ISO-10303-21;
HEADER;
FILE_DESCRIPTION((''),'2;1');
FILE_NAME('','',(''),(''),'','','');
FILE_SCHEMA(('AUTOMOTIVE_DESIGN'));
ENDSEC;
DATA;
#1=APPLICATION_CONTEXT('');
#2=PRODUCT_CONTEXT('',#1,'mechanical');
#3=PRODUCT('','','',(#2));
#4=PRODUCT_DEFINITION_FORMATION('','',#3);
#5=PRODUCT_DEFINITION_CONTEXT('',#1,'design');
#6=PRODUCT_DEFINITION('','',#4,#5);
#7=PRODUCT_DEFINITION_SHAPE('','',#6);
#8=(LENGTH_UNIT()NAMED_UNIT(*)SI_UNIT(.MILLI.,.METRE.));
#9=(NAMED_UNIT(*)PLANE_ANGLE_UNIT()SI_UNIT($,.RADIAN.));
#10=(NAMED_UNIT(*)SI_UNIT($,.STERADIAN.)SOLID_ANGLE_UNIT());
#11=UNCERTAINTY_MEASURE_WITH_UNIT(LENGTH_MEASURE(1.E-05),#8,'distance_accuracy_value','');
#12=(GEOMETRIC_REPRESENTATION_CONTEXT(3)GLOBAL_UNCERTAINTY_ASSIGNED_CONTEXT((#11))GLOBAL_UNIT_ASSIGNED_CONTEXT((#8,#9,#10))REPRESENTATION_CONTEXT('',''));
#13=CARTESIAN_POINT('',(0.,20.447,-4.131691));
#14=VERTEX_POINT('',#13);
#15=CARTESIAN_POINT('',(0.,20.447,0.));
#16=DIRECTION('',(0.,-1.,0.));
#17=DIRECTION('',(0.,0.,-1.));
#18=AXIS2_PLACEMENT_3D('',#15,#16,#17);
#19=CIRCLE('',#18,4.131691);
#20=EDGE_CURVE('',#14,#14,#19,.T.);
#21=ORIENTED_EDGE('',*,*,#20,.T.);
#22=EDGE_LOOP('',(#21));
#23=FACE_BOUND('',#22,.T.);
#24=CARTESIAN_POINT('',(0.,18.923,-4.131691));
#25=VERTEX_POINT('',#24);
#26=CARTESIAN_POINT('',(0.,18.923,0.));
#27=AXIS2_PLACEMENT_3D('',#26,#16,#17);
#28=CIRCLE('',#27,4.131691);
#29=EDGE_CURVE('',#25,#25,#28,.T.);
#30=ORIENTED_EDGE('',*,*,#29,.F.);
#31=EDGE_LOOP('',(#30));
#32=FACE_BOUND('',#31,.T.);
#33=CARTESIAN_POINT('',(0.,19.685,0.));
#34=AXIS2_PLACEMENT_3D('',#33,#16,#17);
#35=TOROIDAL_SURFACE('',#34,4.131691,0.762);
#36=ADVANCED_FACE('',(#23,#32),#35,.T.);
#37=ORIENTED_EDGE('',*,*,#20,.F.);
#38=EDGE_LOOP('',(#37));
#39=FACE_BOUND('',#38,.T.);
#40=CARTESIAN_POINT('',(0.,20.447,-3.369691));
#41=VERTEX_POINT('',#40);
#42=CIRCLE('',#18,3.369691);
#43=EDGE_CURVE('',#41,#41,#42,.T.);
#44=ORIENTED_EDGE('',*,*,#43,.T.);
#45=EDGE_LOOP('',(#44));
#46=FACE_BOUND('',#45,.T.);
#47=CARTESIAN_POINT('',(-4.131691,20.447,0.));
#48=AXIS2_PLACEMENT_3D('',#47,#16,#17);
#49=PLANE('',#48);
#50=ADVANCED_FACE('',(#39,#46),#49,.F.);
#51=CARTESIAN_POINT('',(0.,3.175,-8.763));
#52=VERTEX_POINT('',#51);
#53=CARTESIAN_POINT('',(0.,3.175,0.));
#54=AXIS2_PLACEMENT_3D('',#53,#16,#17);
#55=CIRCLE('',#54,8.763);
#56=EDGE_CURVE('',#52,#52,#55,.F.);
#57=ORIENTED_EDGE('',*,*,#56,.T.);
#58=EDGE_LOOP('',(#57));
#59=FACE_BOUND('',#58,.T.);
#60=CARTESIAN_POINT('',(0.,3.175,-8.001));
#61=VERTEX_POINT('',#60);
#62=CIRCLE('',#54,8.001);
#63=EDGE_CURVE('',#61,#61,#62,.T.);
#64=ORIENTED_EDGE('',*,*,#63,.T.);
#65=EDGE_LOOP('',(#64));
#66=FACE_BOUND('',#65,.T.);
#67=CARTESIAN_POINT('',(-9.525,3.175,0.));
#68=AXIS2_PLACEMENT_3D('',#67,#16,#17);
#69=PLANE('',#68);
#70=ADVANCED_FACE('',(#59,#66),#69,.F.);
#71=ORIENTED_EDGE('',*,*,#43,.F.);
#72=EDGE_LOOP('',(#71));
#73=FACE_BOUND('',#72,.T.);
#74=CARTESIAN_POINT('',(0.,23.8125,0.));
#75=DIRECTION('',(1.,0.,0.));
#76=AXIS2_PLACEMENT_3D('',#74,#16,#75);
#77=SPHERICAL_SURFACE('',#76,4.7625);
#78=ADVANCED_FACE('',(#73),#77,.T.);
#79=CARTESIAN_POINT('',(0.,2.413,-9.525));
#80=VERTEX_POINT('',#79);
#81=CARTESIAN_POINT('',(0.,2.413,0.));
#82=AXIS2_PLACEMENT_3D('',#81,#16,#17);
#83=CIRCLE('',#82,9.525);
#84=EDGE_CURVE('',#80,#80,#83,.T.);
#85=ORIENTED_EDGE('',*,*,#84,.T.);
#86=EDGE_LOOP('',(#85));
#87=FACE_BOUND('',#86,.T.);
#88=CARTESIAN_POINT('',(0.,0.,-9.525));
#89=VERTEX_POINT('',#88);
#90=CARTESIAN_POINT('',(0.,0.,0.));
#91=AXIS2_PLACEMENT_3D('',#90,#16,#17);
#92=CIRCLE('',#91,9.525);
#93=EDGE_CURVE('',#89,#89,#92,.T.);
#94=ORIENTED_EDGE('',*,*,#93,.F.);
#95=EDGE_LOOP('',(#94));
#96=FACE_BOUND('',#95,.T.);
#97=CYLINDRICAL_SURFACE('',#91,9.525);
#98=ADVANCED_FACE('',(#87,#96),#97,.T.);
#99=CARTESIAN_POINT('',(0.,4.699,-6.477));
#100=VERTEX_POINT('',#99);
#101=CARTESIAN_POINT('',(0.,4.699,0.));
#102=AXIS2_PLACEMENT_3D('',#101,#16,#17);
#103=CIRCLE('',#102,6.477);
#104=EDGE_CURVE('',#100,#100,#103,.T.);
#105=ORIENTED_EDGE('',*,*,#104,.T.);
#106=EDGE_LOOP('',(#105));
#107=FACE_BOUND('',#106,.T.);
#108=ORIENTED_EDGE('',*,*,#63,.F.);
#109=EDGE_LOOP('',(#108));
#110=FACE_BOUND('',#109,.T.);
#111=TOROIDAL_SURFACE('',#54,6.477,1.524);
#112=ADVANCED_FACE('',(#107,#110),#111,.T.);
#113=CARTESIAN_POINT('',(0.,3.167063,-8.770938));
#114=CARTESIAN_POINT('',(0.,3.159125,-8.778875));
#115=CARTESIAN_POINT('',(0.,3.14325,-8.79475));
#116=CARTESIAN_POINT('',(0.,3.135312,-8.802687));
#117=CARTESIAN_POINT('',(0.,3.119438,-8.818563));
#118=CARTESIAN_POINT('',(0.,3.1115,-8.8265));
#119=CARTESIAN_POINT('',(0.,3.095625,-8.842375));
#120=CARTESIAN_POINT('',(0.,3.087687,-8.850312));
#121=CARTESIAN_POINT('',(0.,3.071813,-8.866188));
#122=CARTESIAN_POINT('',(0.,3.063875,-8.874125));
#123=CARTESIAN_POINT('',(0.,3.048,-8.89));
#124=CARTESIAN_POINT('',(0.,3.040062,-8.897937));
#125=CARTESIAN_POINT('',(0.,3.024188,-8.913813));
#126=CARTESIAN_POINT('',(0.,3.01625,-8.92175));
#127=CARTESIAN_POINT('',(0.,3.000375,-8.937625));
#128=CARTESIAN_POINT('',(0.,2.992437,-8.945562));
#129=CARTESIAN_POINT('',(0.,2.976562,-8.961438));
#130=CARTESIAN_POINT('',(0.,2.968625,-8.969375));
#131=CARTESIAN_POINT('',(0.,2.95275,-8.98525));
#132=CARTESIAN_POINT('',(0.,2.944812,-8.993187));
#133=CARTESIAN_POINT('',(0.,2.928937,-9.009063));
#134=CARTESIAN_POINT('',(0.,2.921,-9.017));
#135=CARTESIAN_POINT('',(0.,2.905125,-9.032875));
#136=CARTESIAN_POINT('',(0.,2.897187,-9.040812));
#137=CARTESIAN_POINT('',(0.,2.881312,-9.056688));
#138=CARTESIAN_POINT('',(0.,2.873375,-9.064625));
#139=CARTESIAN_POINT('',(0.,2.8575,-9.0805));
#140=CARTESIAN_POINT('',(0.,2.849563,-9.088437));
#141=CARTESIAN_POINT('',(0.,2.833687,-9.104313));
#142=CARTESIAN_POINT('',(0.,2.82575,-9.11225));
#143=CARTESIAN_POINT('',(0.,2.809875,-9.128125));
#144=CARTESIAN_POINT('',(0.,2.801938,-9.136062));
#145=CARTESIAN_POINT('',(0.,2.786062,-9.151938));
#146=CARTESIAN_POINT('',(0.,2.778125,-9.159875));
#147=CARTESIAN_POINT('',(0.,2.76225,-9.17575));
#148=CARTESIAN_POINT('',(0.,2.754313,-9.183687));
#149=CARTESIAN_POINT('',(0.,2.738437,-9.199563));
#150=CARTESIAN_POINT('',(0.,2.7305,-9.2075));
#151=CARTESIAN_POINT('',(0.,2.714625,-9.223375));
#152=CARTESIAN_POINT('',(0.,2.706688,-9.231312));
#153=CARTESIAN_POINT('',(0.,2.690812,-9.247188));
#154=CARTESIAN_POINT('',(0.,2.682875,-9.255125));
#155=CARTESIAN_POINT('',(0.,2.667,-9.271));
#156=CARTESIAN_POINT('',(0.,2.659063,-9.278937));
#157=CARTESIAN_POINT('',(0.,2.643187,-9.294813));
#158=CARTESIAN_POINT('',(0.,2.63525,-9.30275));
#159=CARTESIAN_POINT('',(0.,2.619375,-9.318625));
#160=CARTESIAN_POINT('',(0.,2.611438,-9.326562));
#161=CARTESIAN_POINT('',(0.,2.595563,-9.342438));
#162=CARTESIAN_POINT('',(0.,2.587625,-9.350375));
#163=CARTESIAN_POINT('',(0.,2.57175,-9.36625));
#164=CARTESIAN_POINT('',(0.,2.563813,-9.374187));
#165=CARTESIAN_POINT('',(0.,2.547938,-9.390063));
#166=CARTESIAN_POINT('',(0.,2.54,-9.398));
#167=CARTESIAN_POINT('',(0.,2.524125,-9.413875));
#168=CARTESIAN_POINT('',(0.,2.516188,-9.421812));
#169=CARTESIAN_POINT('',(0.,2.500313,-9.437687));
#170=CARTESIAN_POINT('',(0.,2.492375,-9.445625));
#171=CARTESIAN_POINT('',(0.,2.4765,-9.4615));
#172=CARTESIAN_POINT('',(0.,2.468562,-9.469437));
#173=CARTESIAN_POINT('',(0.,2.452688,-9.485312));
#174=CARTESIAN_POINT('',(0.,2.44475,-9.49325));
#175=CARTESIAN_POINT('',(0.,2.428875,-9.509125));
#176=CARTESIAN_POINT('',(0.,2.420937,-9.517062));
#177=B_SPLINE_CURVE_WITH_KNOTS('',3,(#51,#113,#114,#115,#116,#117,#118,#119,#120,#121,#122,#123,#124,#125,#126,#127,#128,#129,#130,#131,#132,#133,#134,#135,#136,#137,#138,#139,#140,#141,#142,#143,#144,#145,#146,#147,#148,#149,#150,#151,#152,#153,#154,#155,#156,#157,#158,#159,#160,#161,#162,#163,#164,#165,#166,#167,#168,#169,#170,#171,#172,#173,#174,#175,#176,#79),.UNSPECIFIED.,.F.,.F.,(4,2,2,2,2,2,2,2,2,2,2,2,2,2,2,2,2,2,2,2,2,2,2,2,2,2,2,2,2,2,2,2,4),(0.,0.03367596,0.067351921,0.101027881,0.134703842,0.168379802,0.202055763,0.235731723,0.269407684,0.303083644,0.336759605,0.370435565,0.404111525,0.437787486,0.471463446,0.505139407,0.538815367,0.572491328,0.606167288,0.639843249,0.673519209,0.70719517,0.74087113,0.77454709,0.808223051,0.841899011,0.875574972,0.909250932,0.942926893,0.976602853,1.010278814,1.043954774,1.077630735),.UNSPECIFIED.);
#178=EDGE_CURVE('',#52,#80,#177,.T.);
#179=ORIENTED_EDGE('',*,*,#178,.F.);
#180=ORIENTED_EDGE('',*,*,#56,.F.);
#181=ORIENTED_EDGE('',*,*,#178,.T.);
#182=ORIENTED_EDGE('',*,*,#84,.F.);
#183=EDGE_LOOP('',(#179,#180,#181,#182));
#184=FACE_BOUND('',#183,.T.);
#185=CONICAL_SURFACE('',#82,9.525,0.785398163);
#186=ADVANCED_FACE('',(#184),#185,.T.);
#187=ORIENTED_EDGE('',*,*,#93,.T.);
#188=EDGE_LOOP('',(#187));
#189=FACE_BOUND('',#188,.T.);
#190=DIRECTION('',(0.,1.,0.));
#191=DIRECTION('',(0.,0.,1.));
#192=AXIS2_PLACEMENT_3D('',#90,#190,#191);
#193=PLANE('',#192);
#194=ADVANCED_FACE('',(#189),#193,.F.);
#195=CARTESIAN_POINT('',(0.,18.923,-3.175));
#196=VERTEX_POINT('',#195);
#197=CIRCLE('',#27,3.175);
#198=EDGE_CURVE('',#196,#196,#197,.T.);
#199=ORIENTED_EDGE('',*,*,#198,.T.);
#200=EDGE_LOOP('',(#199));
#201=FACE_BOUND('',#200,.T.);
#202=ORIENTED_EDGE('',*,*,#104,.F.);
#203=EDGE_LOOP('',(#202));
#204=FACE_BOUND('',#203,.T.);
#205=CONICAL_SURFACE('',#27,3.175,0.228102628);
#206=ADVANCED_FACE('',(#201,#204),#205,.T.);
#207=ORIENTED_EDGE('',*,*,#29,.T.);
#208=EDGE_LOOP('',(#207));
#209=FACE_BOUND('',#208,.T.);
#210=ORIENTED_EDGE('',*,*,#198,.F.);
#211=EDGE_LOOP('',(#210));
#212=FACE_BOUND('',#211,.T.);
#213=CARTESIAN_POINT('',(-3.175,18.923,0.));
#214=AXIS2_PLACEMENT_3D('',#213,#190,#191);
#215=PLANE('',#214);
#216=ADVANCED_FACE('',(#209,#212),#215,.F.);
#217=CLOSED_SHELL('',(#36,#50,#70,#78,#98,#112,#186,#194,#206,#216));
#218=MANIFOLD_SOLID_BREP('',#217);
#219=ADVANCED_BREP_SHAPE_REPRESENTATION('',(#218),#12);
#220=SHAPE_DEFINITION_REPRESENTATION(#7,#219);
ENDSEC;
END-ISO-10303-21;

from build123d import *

# Parameters (mm, degrees)
FILLET1_R     = 1.524
CHAMFER1_SIZE = 0.762


with BuildPart() as part:
    # Sketch1 → Revolve1 (revolve)
    with BuildSketch(Plane.XY, mode=Mode.PRIVATE) as revolve1_sk:
        with BuildLine():
            Line((0, 0), (-9.525, 0))
            Line((-9.525, 0), (-9.525, 3.175))
            Line((-9.525, 3.175), (-8.001, 3.175))
            Line((-8.001, 3.175), (-8.001, 4.699))
            Line((-8.001, 4.699), (-6.477, 4.699))
            Line((-6.477, 4.699), (-3.175, 18.923))
            Line((-3.175, 18.923), (-4.131690787, 18.923))
            ThreePointArc((-4.131690787, 18.923), (-4.893690787, 19.685), (-4.131690787, 20.447))
            Line((-4.131690787, 20.447), (-3.369690787, 20.447))
            ThreePointArc((-3.369690787, 20.447), (-4.399409051, 25.63639864), (0, 28.575))
            Line((0, 28.575), (0, 0))
        make_face()
    revolve(revolve1_sk.sketch.rotate(Axis((0, 0, 0), (0, 1, 0)), 270), axis=Axis((0, 0, 0), (0, 1, 0)))

    # Fillet1
    fillet1_edges = [part.edges().sort_by_distance(p)[0] for p in [
        (0, 4.699, 8.001),
    ]]
    fillet(fillet1_edges, radius=FILLET1_R - 0.0001)  # a hair under: the kernel refuses the full size

    # Chamfer1
    chamfer1_edges = [part.edges().sort_by_distance(p)[0] for p in [
        (0, 3.175, 9.525),
    ]]
    chamfer(chamfer1_edges, length=CHAMFER1_SIZE)


solid = part.part
